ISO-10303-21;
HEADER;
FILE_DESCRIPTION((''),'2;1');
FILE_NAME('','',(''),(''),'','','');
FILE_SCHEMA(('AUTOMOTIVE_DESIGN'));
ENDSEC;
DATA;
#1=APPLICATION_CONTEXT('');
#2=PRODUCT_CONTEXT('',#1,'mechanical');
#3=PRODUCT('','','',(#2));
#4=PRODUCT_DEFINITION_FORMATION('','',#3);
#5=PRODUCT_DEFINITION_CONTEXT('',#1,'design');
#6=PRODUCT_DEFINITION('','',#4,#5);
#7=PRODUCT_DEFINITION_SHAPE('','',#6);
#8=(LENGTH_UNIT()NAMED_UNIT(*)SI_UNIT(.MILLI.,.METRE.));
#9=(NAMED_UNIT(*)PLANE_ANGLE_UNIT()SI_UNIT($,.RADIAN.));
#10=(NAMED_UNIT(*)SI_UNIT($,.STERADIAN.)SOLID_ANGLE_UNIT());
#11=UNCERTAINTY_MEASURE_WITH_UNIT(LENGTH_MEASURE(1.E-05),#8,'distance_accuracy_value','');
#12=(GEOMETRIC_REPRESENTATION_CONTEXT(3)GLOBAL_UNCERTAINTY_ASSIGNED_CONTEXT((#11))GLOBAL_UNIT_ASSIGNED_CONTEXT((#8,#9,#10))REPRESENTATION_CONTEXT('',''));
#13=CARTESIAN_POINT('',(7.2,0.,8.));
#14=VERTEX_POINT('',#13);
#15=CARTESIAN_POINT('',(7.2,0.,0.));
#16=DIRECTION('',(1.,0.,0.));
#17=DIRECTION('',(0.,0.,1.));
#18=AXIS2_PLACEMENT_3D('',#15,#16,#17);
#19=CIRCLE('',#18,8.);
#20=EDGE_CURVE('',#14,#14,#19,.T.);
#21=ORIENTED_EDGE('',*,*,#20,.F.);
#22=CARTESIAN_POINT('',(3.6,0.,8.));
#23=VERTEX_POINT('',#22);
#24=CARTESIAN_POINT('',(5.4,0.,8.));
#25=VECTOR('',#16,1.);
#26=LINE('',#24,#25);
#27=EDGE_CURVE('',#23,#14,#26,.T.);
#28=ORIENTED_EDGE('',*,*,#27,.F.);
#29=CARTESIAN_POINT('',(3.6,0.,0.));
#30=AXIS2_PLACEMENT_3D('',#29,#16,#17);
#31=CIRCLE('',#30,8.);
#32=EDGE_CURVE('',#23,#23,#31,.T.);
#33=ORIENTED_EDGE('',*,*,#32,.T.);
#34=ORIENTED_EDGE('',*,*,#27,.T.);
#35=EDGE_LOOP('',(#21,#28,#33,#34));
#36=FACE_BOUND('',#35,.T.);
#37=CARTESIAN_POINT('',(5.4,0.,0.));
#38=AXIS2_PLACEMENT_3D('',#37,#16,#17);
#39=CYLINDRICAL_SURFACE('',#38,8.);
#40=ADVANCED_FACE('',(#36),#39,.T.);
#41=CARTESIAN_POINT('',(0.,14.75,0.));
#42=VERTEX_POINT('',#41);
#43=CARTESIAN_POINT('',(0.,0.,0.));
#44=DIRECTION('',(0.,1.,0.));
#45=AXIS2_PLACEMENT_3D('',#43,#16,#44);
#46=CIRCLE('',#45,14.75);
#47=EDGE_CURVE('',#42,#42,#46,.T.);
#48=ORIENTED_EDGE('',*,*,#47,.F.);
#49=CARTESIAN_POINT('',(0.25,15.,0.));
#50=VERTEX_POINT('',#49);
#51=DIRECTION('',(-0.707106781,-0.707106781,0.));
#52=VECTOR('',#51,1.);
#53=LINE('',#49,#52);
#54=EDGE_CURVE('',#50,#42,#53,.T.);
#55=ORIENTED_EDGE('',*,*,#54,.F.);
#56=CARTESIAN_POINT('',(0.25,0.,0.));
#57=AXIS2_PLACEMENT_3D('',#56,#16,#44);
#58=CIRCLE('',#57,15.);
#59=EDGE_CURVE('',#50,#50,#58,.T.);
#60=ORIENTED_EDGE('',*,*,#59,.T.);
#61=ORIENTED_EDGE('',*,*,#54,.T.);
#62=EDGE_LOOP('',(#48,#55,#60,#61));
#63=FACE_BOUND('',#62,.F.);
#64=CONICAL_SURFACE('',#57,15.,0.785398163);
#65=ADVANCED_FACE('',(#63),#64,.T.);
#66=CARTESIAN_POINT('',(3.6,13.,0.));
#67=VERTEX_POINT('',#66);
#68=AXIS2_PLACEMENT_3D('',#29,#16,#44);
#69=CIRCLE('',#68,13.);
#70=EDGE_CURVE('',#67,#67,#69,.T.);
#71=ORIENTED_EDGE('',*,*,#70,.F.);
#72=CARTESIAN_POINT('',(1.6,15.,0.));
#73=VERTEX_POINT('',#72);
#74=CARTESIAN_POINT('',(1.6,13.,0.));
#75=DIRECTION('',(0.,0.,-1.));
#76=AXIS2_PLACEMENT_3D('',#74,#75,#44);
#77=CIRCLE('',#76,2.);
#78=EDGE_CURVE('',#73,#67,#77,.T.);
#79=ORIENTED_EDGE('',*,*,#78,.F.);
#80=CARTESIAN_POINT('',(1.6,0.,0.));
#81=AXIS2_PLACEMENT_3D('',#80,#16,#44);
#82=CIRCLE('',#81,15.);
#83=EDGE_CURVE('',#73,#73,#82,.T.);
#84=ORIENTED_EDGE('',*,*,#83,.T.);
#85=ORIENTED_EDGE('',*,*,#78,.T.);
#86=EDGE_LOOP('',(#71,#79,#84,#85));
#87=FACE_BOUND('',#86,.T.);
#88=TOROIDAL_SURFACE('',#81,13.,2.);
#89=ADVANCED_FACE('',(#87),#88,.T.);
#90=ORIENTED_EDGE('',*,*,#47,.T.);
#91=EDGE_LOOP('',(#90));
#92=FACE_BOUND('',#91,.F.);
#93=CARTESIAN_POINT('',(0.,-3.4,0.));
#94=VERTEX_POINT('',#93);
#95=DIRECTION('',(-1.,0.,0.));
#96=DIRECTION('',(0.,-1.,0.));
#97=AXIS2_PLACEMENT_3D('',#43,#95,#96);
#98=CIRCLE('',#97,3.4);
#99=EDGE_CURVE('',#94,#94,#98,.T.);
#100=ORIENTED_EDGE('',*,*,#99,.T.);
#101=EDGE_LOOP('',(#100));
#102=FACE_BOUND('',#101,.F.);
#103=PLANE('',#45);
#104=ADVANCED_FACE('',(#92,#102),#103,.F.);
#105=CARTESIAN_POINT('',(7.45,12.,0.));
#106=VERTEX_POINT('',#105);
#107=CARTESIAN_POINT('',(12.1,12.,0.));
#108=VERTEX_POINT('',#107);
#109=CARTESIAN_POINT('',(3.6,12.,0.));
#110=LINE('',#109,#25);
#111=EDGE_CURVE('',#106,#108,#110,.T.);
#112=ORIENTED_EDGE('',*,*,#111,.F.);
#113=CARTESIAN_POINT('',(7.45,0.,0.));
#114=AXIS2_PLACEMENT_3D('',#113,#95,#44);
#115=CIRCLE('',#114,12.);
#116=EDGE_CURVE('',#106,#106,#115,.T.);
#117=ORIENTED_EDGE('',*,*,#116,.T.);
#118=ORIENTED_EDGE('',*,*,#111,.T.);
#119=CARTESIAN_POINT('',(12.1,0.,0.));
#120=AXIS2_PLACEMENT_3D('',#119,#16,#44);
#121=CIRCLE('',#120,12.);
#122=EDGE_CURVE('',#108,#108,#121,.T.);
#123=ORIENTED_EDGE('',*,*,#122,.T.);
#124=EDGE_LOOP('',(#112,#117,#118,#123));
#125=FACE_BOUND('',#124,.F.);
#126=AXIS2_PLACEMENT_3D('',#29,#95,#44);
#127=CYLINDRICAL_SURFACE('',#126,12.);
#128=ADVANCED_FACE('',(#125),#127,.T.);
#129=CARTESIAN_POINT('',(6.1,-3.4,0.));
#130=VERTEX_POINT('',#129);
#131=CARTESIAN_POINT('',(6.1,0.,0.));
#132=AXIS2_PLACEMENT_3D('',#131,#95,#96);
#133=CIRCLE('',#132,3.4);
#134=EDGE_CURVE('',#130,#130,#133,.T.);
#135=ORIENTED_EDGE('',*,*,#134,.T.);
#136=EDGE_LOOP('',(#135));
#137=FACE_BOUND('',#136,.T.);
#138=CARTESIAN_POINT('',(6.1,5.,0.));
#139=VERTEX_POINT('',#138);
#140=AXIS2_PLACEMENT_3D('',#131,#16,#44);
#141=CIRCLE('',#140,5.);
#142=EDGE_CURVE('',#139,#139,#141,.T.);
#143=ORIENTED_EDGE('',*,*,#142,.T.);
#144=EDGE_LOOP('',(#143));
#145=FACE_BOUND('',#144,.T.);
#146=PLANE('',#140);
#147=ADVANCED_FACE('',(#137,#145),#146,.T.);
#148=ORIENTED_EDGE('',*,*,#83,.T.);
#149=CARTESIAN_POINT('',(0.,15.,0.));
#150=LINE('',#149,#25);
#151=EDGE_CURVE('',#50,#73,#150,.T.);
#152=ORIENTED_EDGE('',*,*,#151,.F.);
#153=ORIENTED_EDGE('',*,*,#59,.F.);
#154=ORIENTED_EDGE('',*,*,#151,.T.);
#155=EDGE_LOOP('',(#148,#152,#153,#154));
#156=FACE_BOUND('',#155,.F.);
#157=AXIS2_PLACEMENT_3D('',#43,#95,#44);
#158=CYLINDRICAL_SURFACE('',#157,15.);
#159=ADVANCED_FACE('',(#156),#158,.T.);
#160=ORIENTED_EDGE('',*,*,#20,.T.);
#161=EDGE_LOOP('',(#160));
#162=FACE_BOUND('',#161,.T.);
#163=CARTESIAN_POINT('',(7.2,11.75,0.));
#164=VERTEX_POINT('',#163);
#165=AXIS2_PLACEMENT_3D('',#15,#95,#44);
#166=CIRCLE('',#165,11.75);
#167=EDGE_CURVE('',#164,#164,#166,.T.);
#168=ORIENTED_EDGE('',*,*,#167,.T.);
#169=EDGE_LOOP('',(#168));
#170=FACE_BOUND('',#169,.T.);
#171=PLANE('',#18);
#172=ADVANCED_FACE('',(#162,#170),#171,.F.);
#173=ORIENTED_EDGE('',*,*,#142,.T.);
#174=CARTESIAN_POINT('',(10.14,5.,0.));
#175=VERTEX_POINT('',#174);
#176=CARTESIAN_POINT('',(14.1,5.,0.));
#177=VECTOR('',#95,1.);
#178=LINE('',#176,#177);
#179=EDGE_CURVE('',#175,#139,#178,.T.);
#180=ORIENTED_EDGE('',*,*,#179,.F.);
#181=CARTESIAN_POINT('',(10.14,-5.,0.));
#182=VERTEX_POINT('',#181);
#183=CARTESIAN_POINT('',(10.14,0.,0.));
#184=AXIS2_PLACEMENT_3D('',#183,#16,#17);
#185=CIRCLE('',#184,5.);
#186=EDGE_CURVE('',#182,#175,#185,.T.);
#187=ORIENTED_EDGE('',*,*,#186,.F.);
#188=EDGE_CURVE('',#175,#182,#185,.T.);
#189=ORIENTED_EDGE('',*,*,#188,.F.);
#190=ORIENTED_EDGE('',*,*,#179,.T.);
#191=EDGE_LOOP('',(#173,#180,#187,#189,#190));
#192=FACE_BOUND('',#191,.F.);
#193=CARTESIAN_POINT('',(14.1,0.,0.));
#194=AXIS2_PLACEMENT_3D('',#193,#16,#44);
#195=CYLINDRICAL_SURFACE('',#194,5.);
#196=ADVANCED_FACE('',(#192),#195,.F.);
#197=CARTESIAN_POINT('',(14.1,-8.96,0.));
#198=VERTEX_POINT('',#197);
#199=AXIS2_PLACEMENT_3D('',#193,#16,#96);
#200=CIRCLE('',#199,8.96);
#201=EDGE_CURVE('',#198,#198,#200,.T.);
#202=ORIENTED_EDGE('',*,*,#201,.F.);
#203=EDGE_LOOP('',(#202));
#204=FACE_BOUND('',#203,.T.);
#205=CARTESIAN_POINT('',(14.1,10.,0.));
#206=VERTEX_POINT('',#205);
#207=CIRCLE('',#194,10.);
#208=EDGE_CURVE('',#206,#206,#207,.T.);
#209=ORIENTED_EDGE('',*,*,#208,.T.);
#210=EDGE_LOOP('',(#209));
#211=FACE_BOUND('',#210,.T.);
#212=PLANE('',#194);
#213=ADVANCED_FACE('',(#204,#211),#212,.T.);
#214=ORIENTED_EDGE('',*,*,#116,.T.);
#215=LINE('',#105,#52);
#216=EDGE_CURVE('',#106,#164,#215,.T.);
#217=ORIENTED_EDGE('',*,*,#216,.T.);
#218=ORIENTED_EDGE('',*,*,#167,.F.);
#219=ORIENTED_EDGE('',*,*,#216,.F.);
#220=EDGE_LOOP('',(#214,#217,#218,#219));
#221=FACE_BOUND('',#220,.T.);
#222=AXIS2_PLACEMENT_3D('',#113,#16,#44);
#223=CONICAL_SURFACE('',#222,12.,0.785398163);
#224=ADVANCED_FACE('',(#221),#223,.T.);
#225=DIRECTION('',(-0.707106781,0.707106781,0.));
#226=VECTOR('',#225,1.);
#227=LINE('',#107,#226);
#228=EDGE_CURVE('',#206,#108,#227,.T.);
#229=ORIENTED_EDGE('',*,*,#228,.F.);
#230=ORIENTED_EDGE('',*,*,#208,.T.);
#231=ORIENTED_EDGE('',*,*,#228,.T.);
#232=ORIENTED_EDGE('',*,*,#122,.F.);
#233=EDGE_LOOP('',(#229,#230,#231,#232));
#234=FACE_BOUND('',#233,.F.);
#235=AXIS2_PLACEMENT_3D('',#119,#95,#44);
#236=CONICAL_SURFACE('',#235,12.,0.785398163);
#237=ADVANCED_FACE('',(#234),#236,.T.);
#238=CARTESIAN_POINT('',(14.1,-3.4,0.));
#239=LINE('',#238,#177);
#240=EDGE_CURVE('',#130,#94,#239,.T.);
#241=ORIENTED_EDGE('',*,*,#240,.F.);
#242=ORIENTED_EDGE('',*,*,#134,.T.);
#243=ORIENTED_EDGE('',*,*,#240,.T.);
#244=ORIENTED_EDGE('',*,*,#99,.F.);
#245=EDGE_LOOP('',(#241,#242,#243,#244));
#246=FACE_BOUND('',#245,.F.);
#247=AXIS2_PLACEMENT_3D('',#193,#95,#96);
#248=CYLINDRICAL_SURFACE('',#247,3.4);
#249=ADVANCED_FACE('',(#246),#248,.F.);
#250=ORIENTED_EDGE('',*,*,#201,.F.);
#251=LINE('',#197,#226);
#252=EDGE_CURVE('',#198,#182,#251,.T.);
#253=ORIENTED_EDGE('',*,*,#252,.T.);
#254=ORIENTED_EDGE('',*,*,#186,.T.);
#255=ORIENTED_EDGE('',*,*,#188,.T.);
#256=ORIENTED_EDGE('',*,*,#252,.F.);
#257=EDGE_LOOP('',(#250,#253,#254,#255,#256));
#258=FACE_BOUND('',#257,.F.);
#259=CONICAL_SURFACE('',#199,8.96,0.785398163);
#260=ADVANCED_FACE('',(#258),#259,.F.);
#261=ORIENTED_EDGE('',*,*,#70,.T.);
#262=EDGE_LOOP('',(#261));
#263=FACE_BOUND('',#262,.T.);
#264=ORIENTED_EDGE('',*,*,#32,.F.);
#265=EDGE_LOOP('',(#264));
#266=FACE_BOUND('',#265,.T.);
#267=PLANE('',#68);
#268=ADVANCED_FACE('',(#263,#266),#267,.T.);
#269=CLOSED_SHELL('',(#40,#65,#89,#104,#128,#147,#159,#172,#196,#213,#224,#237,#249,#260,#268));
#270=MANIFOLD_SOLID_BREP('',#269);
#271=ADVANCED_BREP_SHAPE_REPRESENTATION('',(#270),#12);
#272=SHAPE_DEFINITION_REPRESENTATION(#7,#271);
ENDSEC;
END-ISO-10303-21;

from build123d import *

# Parameters (mm, degrees)
F0_R           = 15
F1_DEPTH       = 3.6
F2_R           = 12
F3_DEPTH       = 10.5
F5_D           = 6.8
F5_CSINK_D     = 17.92
F5_CSINK_ANGLE = 90
F6_W           = 3.6
F6_H           = 5
F8_SIZE        = 0.25
F9_R           = 2
F10_SIZE       = 2
F11_R          = 5
F12_DEPTH      = 8


with BuildPart() as f1:
    # F0 (on Right) → F1 (new body)
    with BuildSketch(Plane.YZ):
        Circle(F0_R)
    extrude(amount=F1_DEPTH)

    # F2 (on face) → F3 (join)
    with BuildSketch(Plane.YZ.offset(3.6)):
        Circle(F2_R)
    extrude(amount=F3_DEPTH)

    # F5 (through all)
    with Locations(Plane.YZ.offset(14.1)):
        with Locations((0, 0)):
            CounterSinkHole(F5_D / 2, F5_CSINK_D / 2, counter_sink_angle=F5_CSINK_ANGLE)

    # F6 (on Front) → F7 (revolve, cut)
    with BuildSketch(Plane.XZ):
        with Locations((5.4, 10.5)):
            Rectangle(F6_W, F6_H)
    revolve(axis=Axis((8.5571676374, 0, 0), (1, 0, 0)), mode=Mode.SUBTRACT)

    # F8
    f8_edges = [f1.edges().sort_by_distance(p)[0] for p in [
        (0, -15, 0),
        (7.2, -12, 0),
    ]]
    chamfer(f8_edges, length=F8_SIZE)

    # F9
    f9_edges = [f1.edges().sort_by_distance(p)[0] for p in [
        (3.6, -15, 0),
    ]]
    fillet(f9_edges, radius=F9_R)

    # F10
    f10_edges = [f1.edges().sort_by_distance(p)[0] for p in [
        (14.1, -12, 0),
    ]]
    chamfer(f10_edges, length=F10_SIZE)

    # F11 (on face) → F12 (cut)
    with BuildSketch(Plane.YZ.offset(14.1)):
        Circle(F11_R)
    extrude(amount=-F12_DEPTH, mode=Mode.SUBTRACT)


solid = f1.part
